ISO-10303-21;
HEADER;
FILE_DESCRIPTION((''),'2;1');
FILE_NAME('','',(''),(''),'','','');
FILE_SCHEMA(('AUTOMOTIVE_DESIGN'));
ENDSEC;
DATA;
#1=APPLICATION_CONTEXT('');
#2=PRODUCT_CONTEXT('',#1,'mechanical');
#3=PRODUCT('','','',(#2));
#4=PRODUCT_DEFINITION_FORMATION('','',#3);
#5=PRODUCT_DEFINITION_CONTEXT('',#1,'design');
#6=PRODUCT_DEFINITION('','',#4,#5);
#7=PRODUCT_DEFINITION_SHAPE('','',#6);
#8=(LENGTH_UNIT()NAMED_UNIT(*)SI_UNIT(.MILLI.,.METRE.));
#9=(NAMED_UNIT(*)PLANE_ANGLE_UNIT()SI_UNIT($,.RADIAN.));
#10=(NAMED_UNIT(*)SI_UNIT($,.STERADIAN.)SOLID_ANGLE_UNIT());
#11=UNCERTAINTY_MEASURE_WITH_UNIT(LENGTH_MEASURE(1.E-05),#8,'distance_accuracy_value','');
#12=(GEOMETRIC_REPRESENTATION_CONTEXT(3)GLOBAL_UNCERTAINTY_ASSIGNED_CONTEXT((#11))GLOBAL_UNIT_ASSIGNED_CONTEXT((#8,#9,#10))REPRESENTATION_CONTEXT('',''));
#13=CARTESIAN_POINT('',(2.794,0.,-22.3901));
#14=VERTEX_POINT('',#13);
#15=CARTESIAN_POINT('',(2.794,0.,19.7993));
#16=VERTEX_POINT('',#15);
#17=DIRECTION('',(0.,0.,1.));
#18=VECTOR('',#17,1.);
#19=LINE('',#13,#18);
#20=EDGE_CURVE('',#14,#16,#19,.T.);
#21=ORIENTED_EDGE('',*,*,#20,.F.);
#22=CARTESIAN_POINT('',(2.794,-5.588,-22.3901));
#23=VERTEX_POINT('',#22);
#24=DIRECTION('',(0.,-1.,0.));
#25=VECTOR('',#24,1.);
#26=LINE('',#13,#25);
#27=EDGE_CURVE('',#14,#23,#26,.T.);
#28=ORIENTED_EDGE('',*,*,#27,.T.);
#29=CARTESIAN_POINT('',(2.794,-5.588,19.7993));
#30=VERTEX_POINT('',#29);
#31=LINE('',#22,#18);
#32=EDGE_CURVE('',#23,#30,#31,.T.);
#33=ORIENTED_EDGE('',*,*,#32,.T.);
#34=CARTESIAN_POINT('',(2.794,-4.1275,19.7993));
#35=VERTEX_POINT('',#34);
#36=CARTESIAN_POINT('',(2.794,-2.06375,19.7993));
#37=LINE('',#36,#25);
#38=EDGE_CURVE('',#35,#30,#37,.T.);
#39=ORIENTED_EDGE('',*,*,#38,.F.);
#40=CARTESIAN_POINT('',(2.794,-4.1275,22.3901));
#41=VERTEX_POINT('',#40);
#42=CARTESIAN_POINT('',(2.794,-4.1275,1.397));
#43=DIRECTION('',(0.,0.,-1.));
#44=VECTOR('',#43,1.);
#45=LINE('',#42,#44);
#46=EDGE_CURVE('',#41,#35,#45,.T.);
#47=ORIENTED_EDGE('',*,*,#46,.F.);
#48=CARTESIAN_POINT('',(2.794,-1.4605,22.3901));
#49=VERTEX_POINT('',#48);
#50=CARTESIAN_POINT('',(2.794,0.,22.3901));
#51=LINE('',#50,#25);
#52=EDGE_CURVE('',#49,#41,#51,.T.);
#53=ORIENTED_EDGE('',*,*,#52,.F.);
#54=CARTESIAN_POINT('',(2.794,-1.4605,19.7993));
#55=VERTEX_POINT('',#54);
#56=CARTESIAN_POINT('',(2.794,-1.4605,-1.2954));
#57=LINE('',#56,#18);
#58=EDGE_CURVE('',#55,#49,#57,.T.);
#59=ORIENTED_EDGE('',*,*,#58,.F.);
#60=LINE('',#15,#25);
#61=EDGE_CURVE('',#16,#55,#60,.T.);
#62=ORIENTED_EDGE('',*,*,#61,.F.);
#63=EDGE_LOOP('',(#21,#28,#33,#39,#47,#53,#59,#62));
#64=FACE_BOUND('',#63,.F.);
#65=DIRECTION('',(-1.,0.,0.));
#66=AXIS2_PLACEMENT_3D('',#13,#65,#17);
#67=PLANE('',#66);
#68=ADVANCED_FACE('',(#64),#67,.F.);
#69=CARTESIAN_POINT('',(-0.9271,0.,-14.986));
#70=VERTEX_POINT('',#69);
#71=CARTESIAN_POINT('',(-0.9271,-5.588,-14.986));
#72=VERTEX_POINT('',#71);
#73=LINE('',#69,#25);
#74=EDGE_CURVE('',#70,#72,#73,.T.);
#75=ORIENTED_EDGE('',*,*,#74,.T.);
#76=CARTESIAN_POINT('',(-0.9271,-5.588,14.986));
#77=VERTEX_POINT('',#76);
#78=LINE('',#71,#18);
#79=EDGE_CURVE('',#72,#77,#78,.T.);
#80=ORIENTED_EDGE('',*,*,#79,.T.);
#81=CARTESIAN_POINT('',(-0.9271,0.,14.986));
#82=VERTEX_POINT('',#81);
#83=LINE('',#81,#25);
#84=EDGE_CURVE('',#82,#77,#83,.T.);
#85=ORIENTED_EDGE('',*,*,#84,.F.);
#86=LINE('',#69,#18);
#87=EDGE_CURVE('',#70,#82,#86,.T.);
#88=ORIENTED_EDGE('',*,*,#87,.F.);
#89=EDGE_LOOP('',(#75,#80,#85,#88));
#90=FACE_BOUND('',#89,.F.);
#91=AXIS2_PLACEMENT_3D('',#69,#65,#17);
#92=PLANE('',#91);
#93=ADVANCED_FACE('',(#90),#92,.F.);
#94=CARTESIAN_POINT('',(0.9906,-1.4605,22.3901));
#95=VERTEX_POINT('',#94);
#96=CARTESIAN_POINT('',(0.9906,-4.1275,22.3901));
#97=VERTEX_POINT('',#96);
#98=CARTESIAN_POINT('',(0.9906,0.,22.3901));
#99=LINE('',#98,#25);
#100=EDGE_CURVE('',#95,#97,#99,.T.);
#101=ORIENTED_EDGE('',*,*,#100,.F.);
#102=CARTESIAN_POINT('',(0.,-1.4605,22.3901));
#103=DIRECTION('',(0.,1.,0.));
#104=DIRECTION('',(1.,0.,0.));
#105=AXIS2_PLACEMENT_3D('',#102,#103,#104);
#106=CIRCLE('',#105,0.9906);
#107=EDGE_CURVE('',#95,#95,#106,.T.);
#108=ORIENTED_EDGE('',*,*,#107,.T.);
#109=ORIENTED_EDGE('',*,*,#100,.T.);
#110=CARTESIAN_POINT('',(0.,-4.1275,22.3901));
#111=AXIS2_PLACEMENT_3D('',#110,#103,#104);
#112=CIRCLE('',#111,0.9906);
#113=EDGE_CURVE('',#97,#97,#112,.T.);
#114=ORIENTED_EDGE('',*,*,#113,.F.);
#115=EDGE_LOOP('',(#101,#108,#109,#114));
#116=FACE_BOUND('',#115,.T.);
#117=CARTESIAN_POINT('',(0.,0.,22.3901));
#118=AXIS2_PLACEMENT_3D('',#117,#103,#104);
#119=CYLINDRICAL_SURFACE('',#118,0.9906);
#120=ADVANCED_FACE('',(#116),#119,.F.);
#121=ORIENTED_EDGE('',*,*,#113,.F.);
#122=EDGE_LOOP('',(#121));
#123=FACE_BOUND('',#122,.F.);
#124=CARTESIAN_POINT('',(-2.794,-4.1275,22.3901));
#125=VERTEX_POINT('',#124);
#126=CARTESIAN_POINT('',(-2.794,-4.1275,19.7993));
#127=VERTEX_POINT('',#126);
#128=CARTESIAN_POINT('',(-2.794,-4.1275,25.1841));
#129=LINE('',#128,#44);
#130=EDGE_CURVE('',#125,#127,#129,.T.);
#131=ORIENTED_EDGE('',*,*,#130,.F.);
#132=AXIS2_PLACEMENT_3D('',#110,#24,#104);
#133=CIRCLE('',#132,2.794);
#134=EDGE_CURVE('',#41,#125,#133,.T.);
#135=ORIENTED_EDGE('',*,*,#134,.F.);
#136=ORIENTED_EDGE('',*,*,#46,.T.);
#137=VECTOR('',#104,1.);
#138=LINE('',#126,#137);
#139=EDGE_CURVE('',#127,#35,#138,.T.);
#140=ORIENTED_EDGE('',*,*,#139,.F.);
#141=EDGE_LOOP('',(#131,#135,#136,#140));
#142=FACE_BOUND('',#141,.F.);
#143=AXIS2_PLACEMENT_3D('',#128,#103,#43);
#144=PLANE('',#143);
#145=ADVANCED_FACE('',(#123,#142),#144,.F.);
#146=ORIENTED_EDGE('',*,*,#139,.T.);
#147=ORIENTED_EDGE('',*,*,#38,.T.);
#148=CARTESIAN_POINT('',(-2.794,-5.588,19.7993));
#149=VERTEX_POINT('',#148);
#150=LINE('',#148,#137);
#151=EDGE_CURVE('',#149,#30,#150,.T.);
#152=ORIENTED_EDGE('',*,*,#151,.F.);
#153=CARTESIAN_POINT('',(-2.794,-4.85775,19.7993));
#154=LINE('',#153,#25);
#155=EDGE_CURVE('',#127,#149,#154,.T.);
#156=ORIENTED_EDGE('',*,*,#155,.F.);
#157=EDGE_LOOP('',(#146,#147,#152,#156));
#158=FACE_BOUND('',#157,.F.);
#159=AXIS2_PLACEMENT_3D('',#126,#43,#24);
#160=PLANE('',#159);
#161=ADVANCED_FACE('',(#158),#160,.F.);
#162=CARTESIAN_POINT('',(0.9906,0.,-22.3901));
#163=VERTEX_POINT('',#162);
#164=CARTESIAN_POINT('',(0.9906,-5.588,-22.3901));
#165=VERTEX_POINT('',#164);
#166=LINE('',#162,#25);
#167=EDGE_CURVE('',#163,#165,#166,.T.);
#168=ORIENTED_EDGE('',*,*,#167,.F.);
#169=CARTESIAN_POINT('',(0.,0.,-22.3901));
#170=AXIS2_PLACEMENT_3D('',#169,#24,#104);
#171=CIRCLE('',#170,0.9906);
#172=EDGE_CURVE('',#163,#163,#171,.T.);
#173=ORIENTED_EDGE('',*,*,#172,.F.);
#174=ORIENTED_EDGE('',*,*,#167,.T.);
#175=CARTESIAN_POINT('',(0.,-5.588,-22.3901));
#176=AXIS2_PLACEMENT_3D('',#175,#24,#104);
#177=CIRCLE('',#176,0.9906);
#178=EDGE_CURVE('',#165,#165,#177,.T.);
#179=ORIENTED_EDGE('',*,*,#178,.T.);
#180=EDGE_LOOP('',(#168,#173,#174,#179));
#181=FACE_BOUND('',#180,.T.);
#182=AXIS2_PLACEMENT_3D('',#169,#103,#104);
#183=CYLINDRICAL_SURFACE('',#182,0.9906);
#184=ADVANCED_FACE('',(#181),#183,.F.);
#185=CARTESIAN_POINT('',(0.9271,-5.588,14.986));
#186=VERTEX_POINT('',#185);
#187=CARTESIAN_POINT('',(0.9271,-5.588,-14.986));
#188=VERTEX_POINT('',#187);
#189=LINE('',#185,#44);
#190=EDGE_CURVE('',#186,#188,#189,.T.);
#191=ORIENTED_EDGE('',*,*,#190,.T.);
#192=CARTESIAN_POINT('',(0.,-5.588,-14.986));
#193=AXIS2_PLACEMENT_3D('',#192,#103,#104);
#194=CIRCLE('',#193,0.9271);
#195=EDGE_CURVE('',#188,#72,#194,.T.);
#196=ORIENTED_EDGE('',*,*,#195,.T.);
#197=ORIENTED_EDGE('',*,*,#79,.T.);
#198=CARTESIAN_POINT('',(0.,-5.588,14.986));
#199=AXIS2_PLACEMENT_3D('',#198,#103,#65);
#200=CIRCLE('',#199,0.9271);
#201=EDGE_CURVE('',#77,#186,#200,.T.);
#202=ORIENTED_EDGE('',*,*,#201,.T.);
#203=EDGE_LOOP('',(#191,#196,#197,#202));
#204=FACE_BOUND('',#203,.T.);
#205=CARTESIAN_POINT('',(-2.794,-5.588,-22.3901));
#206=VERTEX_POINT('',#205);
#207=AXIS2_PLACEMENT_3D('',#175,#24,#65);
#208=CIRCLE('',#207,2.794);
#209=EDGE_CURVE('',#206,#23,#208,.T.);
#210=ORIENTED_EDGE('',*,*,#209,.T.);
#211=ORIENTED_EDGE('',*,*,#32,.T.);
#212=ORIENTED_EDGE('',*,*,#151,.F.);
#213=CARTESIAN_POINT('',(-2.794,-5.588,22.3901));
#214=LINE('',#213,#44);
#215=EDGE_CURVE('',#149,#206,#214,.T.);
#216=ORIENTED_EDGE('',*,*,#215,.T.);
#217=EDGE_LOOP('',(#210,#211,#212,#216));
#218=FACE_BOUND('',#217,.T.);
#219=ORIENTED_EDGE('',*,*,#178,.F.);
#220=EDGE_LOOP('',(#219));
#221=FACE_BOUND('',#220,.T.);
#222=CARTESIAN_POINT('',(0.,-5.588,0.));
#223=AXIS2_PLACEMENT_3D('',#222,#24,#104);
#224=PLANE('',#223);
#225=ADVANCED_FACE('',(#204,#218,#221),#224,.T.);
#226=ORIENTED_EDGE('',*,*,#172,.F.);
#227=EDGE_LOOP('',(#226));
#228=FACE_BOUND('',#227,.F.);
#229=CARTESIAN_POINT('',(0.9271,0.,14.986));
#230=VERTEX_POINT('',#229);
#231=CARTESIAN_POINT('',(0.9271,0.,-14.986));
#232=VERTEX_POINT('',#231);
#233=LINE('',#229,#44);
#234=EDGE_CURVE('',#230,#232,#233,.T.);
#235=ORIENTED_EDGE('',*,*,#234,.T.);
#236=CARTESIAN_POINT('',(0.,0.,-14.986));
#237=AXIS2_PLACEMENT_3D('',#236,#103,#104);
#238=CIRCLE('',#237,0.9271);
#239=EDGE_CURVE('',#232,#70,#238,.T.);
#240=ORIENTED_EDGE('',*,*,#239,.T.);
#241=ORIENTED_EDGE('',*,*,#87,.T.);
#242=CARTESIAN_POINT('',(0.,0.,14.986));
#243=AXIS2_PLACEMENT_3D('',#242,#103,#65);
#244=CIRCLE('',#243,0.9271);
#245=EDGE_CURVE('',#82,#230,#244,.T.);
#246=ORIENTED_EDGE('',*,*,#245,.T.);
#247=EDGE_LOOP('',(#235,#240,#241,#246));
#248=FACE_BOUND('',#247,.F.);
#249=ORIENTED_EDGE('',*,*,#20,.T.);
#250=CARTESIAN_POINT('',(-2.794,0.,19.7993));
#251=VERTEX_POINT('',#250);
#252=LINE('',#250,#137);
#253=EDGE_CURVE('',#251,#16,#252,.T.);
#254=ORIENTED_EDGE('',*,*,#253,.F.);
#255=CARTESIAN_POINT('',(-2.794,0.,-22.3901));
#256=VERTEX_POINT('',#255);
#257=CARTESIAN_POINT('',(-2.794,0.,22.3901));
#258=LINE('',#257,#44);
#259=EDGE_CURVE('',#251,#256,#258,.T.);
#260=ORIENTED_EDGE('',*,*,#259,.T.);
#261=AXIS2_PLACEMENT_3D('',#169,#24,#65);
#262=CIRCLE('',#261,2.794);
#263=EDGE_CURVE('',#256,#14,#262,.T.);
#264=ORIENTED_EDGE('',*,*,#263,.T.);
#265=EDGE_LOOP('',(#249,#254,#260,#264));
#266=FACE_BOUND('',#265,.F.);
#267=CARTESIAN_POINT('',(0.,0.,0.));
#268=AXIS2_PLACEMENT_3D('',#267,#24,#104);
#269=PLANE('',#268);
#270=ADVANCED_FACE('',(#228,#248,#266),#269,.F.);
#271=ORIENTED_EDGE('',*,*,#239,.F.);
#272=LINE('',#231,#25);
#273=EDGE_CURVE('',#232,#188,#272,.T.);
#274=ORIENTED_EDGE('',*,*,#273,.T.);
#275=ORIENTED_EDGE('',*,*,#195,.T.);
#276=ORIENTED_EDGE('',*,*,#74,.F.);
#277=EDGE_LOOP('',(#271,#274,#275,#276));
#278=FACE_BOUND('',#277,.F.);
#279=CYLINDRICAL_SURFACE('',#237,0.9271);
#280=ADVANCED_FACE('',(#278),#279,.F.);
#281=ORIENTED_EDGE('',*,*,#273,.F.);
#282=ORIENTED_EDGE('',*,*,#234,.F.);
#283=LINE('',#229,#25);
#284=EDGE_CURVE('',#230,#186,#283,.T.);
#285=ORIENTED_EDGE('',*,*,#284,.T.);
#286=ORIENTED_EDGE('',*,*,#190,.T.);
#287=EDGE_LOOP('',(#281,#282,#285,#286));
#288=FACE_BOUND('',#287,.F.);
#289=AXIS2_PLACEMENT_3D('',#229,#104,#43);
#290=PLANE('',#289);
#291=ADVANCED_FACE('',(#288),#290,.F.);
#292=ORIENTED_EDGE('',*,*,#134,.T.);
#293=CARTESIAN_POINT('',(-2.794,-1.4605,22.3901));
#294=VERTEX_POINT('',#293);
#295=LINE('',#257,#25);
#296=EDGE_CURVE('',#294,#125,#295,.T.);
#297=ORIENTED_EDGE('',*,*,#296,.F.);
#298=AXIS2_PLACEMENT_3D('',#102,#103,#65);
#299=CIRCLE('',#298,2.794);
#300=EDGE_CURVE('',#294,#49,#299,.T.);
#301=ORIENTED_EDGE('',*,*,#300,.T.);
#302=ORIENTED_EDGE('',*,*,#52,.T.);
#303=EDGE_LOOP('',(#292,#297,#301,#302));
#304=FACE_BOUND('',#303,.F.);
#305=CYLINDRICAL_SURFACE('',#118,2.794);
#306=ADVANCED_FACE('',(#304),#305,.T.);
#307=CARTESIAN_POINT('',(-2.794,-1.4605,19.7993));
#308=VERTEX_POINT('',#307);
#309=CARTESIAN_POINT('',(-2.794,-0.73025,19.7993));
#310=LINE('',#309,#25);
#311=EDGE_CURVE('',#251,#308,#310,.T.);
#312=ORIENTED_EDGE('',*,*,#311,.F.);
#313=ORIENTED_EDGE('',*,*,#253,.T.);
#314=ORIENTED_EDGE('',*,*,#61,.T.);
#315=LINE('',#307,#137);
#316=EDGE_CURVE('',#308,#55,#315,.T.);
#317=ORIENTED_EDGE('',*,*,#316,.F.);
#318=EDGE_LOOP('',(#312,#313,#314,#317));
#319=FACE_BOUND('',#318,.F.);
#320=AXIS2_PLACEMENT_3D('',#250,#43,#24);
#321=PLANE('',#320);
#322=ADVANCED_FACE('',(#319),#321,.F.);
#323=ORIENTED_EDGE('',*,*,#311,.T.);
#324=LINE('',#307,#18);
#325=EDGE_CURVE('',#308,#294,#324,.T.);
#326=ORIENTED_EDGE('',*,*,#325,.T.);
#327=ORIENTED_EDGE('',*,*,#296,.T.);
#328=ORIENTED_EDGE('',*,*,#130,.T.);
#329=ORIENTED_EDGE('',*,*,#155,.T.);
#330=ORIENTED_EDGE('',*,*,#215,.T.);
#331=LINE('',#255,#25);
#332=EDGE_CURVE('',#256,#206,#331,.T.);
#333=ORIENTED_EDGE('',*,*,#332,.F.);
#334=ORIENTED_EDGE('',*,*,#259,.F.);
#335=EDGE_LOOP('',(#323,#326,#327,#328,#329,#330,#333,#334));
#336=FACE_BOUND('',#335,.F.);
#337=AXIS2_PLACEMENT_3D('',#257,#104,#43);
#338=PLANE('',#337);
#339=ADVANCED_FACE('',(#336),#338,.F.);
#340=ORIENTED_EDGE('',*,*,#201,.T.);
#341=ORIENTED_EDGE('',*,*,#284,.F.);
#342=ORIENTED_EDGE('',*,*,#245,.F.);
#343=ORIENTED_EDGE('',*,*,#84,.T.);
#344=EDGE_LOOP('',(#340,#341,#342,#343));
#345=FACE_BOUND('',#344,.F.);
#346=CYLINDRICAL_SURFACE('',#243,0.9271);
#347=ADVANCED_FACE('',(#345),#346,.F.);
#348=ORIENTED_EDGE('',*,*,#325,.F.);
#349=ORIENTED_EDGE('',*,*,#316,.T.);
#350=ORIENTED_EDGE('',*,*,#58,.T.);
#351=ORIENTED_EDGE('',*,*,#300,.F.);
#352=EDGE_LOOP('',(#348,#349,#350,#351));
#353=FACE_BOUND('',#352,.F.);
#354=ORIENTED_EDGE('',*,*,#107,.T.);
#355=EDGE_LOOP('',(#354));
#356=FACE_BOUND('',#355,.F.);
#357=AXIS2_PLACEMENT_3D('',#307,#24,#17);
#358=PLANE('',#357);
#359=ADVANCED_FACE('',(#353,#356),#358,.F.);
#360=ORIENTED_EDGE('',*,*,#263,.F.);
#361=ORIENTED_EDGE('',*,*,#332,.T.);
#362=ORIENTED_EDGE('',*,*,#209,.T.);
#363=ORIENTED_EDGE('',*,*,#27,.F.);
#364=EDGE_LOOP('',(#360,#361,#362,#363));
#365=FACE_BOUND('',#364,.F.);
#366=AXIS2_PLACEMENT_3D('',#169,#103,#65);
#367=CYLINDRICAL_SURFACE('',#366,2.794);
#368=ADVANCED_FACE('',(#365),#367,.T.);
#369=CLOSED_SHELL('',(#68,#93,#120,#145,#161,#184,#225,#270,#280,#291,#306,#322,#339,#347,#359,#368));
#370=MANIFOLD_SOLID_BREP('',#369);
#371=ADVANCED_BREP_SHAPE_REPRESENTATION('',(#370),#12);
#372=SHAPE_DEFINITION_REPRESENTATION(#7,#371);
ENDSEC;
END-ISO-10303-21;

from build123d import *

# Parameters (mm, degrees)
F0_W     = 5.588
F0_H     = 33.6042
F0_R     = 0.9906
F2_DEPTH = 5.588
F3_W     = 1.4605
F3_H     = 2.5908
F3_H_2   = 2.794
F4_DEPTH = 5.589


# Not quite as in the source:
# - the program builds the solid bodies; features that only make, move or delete a surface that nothing else refers to are left out


with BuildPart() as f2:
    # F0 (on Front) → F2 (new body)
    with BuildSketch(Plane.XZ):
        Rectangle(F0_W, F0_H)
        with BuildLine():
            ThreePointArc((-0.9271, 14.986), (0, 15.9131), (0.9271, 14.986))
            Line((0.9271, 14.986), (0.9271, -14.986))
            ThreePointArc((0.9271, -14.986), (0, -15.9131), (-0.9271, -14.986))
            Line((-0.9271, -14.986), (-0.9271, 14.986))
        make_face(mode=Mode.SUBTRACT)
        with BuildLine():
            Line((-2.794, 16.8021), (2.794, 16.8021))
            Line((2.794, 16.8021), (2.794, 22.3901))
            ThreePointArc((2.794, 22.3901), (0, 25.1841), (-2.794, 22.3901))
            Line((-2.794, 22.3901), (-2.794, 16.8021))
        make_face()
        with Locations((0, 22.3901)):
            Circle(F0_R, mode=Mode.SUBTRACT)
        with BuildLine():
            Line((2.794, -22.3901), (2.794, -16.8021))
            Line((2.794, -16.8021), (-2.794, -16.8021))
            Line((-2.794, -16.8021), (-2.794, -22.3901))
            ThreePointArc((-2.794, -22.3901), (0, -25.1841), (2.794, -22.3901))
        make_face()
        with Locations((0, -22.3901)):
            Circle(F0_R, mode=Mode.SUBTRACT)
    extrude(amount=F2_DEPTH)

    # F3 (on face) → F4 (cut, through all)
    with BuildSketch(Plane(origin=(-2.794, 0, 0), x_dir=(0, -1, 0), z_dir=(-1, 0, 0))):
        with Locations((0.73025, 21.0947)):
            Rectangle(F3_W, F3_H)
        with Locations((0.73025, 23.7871)):
            Rectangle(F3_W, F3_H_2)
        with Locations((4.85775, 23.7871)):
            Rectangle(F3_W, F3_H_2)
        with Locations((4.85775, 21.0947)):
            Rectangle(F3_W, F3_H)
    extrude(amount=-F4_DEPTH, mode=Mode.SUBTRACT)


solid = f2.part
